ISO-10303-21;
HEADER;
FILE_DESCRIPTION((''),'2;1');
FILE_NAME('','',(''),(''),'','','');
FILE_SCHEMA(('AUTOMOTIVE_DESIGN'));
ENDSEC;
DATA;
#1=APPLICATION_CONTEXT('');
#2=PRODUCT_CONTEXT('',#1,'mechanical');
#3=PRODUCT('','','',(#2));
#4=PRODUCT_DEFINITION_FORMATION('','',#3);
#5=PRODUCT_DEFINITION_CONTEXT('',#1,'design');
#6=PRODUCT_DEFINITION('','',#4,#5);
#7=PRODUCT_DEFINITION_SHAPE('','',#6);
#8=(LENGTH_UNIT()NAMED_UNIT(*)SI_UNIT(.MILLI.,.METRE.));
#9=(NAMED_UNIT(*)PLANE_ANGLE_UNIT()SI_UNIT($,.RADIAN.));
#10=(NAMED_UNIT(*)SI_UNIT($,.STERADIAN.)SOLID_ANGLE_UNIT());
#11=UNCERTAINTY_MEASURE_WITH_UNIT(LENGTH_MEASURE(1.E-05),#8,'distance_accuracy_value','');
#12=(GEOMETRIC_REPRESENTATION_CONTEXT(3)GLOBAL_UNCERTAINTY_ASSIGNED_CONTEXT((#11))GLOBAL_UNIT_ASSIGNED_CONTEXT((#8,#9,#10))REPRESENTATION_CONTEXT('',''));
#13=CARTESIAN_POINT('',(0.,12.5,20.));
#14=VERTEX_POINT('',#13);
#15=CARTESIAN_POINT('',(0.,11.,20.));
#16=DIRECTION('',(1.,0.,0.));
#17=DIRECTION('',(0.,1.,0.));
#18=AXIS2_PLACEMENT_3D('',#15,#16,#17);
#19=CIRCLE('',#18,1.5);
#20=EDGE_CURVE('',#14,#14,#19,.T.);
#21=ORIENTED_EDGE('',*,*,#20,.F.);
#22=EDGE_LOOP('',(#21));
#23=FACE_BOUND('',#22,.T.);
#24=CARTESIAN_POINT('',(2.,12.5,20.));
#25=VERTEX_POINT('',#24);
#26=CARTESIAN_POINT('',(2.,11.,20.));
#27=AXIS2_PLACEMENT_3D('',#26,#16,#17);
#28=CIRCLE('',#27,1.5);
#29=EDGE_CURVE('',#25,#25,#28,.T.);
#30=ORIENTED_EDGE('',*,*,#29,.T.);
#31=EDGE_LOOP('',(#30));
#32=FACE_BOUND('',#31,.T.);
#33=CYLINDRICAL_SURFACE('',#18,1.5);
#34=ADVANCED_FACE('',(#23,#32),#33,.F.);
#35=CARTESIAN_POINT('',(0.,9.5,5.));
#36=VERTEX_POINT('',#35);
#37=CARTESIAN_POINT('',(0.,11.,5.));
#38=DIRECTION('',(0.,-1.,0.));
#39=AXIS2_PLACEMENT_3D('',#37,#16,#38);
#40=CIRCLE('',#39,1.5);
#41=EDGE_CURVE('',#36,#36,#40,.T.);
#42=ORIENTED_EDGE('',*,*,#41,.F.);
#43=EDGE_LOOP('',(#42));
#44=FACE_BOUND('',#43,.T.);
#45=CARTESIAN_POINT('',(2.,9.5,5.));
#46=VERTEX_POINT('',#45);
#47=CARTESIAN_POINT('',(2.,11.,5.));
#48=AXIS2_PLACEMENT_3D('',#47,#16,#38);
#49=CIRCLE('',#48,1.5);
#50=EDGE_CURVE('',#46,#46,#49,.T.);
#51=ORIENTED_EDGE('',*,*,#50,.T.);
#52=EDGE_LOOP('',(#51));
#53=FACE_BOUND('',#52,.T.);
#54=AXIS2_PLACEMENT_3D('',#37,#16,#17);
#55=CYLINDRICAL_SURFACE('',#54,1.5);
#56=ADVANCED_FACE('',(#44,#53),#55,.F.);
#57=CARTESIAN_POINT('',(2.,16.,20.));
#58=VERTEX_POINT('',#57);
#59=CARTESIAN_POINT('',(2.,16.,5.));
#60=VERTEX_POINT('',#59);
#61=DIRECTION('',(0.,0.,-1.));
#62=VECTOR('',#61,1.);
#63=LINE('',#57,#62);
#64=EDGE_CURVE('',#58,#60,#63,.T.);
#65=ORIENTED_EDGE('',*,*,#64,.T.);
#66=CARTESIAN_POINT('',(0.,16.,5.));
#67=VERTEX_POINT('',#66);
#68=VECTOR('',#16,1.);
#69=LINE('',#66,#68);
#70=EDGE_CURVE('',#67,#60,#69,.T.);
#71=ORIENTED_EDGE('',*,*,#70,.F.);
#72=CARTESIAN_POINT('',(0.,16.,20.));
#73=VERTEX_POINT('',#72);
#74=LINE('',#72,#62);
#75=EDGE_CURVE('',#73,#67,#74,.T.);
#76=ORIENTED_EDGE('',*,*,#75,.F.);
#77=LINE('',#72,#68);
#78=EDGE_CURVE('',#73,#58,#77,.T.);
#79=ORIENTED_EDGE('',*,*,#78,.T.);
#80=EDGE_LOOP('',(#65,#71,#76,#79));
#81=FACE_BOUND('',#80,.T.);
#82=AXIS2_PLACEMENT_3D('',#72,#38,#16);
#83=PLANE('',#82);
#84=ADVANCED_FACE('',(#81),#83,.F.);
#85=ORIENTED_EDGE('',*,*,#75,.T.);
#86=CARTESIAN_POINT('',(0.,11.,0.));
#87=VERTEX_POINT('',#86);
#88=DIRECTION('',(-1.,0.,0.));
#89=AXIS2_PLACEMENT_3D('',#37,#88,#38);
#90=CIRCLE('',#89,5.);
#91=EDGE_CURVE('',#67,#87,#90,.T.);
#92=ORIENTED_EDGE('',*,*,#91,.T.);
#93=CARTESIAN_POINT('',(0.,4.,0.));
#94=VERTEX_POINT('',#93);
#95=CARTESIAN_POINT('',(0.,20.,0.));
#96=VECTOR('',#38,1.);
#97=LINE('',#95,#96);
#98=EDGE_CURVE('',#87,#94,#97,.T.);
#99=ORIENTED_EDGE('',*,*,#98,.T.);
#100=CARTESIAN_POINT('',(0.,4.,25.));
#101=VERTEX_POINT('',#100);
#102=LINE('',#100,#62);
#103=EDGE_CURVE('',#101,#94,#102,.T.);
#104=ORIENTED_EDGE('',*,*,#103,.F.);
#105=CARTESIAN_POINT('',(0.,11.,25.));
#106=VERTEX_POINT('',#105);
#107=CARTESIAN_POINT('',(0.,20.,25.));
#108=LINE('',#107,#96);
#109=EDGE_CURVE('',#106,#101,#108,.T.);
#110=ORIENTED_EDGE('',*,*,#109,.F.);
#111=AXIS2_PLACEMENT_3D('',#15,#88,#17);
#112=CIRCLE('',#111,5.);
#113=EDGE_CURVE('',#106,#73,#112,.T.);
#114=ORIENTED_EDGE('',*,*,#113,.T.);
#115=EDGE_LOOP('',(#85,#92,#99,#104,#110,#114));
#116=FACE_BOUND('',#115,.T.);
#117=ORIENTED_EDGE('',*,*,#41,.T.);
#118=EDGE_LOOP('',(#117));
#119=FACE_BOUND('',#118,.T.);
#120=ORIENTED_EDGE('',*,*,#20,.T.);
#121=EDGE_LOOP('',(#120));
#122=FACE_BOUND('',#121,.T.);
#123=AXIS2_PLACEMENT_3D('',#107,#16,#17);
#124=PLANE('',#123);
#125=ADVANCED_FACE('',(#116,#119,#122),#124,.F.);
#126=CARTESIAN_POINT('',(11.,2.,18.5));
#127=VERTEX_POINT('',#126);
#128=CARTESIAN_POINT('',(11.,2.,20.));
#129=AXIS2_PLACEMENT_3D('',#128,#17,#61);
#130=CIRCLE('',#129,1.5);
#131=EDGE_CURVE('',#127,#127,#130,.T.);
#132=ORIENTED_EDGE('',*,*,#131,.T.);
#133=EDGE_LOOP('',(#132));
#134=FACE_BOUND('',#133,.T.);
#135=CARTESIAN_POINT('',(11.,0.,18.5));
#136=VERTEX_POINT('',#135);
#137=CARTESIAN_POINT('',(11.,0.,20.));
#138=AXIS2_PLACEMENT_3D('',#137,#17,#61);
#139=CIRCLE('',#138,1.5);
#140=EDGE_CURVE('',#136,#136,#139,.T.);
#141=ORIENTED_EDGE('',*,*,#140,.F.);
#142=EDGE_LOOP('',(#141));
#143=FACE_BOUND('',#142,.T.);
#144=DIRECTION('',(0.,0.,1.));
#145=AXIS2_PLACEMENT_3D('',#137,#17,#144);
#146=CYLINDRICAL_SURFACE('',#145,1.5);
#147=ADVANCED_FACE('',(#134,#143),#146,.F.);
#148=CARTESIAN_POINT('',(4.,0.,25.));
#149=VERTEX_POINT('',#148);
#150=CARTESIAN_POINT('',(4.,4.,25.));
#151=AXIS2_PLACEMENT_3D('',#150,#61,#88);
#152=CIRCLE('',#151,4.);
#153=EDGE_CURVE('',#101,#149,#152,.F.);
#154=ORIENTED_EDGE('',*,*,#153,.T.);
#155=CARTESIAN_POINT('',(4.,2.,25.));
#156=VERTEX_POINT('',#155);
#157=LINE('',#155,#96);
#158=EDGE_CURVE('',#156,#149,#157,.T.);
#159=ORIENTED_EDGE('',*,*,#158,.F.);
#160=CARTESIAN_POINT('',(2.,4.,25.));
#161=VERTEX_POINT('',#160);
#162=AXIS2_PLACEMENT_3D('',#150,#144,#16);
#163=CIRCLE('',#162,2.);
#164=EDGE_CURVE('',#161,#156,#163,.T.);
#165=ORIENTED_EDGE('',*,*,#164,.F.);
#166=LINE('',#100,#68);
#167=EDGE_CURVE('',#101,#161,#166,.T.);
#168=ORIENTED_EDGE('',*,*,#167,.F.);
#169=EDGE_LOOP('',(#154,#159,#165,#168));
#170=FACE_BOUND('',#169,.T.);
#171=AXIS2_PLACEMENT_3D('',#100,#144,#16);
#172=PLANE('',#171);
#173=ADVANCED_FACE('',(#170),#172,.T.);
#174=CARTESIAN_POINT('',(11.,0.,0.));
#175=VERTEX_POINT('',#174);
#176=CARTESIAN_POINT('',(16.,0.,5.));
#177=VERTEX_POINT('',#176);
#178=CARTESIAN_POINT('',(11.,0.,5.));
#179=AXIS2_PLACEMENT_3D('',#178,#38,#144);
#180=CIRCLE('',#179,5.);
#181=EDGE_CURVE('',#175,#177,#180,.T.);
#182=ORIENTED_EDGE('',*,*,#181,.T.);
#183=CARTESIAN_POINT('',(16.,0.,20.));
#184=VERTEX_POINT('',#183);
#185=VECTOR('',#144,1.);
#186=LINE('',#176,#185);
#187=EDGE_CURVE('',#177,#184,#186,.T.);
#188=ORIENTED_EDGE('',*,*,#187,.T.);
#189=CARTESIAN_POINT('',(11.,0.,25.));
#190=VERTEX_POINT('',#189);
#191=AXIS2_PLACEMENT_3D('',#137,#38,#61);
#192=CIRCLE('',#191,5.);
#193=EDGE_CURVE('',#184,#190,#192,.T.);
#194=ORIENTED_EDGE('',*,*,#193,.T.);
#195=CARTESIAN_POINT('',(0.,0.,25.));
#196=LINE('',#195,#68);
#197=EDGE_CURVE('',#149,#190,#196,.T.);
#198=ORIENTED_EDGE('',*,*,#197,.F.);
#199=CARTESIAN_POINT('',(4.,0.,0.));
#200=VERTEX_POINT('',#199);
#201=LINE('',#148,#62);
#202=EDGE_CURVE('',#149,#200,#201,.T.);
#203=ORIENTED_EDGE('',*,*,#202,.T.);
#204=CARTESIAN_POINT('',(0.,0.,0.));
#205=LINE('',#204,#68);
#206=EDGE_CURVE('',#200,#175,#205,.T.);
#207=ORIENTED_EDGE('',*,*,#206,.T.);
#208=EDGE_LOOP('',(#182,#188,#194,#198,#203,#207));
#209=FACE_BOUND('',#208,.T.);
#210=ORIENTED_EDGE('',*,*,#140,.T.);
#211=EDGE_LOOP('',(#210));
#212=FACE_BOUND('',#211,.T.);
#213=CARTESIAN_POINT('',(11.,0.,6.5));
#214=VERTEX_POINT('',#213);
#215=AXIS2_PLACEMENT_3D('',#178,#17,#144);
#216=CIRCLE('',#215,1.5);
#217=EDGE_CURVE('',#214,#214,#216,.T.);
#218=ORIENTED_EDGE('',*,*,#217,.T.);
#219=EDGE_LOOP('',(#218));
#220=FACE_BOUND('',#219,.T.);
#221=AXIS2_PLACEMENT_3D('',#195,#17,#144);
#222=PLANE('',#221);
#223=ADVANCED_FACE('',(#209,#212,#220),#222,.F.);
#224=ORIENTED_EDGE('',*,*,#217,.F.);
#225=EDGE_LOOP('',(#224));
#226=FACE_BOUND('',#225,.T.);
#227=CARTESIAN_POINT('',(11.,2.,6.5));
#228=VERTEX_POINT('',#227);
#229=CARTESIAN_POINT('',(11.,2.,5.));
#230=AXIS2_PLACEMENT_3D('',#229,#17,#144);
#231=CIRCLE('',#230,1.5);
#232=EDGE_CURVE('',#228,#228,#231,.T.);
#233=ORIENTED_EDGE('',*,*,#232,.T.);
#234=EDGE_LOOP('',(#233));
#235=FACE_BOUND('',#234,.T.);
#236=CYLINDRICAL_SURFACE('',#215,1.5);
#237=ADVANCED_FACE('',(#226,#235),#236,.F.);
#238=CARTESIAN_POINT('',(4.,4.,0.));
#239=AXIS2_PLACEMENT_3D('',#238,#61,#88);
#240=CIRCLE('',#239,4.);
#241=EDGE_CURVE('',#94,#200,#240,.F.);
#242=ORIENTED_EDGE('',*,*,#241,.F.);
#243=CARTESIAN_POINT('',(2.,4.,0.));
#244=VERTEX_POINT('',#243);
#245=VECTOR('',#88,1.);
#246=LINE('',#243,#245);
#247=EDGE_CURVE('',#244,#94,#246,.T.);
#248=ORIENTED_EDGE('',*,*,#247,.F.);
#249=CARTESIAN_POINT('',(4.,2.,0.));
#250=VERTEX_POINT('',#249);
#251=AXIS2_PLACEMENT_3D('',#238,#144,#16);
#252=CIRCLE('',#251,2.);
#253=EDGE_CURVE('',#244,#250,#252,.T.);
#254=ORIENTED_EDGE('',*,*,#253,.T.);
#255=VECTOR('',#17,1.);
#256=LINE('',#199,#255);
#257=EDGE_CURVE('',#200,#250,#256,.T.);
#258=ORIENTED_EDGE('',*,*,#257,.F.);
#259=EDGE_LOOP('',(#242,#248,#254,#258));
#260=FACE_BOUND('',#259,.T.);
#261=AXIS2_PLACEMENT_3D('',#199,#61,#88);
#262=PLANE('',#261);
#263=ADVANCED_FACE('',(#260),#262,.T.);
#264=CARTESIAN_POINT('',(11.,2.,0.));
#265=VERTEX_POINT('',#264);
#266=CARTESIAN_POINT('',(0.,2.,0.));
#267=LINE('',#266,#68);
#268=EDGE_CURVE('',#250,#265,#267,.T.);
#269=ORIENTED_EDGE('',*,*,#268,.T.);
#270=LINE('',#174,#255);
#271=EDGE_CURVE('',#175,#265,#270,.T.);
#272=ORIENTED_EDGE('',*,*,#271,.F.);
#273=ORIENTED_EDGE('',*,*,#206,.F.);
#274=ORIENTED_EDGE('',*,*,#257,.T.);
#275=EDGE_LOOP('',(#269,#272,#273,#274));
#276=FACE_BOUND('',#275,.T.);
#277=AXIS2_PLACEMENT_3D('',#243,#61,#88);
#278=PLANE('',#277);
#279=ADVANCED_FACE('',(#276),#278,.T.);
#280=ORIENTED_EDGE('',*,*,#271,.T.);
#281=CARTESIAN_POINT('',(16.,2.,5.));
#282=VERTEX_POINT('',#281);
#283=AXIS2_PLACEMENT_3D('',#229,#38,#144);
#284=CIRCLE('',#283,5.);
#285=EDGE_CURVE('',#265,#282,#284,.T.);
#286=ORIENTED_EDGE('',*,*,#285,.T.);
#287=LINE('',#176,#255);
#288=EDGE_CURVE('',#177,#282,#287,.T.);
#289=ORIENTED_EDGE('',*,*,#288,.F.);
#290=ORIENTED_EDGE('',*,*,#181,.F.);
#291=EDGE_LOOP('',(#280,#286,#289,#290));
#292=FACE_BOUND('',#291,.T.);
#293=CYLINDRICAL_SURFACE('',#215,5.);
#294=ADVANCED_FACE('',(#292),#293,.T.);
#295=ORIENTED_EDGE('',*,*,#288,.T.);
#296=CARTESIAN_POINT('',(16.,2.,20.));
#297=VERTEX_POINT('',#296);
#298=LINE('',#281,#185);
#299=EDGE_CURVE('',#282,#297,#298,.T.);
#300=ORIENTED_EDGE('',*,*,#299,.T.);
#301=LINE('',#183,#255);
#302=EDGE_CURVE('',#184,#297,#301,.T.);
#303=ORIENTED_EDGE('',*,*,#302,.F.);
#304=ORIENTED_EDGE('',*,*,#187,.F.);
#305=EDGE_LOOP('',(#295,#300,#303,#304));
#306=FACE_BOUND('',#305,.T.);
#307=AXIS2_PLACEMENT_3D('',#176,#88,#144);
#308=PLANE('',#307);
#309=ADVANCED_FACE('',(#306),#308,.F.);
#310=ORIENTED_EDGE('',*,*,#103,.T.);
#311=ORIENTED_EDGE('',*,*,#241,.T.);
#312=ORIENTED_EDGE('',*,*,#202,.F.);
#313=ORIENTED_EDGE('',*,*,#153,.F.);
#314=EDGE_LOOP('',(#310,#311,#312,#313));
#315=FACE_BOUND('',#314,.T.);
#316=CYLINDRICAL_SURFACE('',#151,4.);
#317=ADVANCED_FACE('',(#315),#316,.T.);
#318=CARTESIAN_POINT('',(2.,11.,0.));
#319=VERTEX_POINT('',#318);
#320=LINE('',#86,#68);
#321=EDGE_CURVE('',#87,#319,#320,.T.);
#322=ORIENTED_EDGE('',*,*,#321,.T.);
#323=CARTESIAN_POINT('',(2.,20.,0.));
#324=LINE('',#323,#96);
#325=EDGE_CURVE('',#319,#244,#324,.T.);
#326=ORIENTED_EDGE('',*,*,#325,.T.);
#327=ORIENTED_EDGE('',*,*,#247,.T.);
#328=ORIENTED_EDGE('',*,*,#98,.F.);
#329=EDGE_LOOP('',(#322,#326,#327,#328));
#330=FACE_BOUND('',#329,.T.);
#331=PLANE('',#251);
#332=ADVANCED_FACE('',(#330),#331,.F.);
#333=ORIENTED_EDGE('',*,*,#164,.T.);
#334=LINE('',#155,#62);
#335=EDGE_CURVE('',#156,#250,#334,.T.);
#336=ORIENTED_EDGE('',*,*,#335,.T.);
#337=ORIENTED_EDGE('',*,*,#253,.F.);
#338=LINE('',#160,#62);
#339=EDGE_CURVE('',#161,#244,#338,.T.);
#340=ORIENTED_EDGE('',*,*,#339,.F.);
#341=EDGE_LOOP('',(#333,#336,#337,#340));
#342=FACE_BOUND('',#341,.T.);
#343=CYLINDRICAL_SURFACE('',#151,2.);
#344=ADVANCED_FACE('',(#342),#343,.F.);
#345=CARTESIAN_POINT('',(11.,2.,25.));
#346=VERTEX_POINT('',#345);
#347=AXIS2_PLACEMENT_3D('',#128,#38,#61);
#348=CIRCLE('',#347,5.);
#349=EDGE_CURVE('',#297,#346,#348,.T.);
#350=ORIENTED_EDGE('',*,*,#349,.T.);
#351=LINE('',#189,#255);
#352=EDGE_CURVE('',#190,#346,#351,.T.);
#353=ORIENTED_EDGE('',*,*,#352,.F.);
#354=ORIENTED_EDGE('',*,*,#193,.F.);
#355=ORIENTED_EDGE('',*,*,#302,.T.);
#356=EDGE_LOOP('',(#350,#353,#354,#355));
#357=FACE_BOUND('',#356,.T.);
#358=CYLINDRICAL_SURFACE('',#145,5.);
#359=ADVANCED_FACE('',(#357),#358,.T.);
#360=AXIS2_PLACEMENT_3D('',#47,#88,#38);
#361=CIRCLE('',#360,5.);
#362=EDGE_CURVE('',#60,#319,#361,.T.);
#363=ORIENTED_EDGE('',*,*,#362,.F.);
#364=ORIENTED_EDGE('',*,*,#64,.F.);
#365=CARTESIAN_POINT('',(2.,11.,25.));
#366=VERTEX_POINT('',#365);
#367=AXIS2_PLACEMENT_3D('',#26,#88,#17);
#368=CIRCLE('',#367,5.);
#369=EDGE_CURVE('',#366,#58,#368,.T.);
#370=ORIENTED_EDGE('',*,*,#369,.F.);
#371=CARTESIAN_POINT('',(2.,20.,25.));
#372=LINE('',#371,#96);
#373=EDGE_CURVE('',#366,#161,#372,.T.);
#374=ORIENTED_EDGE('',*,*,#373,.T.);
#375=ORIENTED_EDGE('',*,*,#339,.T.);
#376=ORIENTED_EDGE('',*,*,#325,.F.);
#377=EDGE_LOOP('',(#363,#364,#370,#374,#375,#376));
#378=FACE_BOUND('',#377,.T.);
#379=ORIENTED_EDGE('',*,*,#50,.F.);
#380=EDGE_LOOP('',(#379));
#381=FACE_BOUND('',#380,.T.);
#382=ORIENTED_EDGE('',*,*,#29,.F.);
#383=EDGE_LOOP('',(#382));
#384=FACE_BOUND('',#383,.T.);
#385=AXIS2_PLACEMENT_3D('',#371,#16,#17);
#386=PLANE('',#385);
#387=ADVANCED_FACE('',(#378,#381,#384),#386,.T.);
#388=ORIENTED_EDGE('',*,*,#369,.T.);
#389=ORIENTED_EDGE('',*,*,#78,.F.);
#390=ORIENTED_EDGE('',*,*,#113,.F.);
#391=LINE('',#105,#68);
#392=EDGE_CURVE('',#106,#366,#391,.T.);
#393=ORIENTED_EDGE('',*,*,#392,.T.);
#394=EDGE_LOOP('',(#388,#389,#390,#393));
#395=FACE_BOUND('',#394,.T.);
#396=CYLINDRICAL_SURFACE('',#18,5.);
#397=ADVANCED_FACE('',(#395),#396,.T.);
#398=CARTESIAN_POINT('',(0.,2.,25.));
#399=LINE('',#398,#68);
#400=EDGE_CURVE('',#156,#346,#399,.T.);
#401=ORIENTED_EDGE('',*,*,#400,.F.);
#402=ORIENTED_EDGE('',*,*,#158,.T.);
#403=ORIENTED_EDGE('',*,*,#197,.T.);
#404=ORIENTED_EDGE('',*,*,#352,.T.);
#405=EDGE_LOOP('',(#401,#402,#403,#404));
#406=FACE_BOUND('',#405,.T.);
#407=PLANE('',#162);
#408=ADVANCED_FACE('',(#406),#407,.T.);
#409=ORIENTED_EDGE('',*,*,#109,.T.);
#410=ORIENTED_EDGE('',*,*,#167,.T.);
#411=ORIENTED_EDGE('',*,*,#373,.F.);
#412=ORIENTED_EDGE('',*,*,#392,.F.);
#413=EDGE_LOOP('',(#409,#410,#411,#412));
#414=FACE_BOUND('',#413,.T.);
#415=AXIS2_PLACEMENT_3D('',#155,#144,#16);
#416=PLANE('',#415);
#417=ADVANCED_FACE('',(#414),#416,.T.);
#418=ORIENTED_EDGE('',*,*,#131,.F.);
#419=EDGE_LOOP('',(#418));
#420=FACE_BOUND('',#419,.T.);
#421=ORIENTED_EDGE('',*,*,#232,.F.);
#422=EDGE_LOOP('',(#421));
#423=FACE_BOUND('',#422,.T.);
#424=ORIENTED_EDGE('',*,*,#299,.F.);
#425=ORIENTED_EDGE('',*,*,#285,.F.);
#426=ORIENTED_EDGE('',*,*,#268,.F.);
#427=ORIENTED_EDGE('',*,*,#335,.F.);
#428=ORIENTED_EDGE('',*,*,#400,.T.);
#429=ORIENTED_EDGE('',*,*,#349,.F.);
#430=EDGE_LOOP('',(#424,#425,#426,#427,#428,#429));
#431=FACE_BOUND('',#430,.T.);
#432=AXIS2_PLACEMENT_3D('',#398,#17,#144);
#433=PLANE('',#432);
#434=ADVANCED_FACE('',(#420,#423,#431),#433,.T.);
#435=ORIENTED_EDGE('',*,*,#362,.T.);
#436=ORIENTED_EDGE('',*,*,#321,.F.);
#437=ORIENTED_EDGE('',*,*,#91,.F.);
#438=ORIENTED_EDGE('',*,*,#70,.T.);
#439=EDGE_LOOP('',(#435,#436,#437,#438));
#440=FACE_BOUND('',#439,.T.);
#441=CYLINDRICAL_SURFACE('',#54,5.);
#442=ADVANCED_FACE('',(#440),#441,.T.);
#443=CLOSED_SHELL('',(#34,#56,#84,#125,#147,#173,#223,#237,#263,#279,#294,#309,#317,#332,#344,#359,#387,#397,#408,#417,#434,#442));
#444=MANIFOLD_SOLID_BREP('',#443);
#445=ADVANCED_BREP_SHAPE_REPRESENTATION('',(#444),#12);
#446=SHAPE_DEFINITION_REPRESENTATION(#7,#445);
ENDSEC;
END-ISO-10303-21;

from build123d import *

# Parameters (mm, degrees)
SM_BASE_FLANGE_1_DEPTH = 25
SKETCH_6_R             = 1.5
CUT_EXTRUDE_1_DEPTH    = 37.728735344
SKETCH_7_R             = 1.5
CUT_EXTRUDE_2_DEPTH    = 35.942810419


# Sheet-metal steps are written as plain solids
with BuildPart() as part:
    # Sketch 1 → 基体-法兰1 (new body)
    with BuildSketch(Plane.XY):
        with BuildLine():
            Line((0, 20), (0, 4))
            ThreePointArc((0, 4), (1.171572875, 1.171572875), (4, 0))
            Line((4, 0), (20, 0))
            Line((20, 0), (20, 2))
            Line((20, 2), (4, 2))
            ThreePointArc((4, 2), (2.585786438, 2.585786438), (2, 4))
            Line((2, 4), (2, 20))
            Line((2, 20), (0, 20))
        make_face()
    extrude(amount=SM_BASE_FLANGE_1_DEPTH)

    # 草图6 → 切除-拉伸1 (cut, through all)
    with BuildSketch(Plane(origin=(0, 2, 0), x_dir=(1, 0, 0), z_dir=(0, 1, 0))):
        with Locations(Location((11, -5, 0), (0, 0, 270))):
            Circle(SKETCH_6_R)
        with Locations(Location((11, -20, 0), (0, 0, 90))):
            Circle(SKETCH_6_R)
        with BuildLine():
            Line((11, 0), (33.790991845, 0))
            Line((33.790991845, 0), (33.790991845, -25))
            Line((33.790991845, -25), (11, -25))
            ThreePointArc((11, -25), (14.535533906, -23.535533906), (16, -20))
            Line((16, -20), (16, -5))
            ThreePointArc((16, -5), (14.535533906, -1.464466094), (11, 0))
        make_face()
    extrude(amount=-CUT_EXTRUDE_1_DEPTH, mode=Mode.SUBTRACT)

    # 草图7 → 切除-拉伸2 (cut, through all)
    with BuildSketch(Plane(origin=(2, 0, 0), x_dir=(0, 0, -1), z_dir=(1, 0, 0))):
        with Locations(Location((-20, 11, 0), (0, 0, 90))):
            Circle(SKETCH_7_R)
        with Locations(Location((-5, 11, 0), (0, 0, 270))):
            Circle(SKETCH_7_R)
        with BuildLine():
            Line((-25, 11), (-25, 23.177465953))
            Line((-25, 23.177465953), (0, 23.177465953))
            Line((0, 23.177465953), (0, 11))
            ThreePointArc((0, 11), (-1.464466094, 14.535533906), (-5, 16))
            Line((-5, 16), (-20, 16))
            ThreePointArc((-20, 16), (-23.535533906, 14.535533906), (-25, 11))
        make_face()
    extrude(amount=-CUT_EXTRUDE_2_DEPTH, mode=Mode.SUBTRACT)


solid = part.part
